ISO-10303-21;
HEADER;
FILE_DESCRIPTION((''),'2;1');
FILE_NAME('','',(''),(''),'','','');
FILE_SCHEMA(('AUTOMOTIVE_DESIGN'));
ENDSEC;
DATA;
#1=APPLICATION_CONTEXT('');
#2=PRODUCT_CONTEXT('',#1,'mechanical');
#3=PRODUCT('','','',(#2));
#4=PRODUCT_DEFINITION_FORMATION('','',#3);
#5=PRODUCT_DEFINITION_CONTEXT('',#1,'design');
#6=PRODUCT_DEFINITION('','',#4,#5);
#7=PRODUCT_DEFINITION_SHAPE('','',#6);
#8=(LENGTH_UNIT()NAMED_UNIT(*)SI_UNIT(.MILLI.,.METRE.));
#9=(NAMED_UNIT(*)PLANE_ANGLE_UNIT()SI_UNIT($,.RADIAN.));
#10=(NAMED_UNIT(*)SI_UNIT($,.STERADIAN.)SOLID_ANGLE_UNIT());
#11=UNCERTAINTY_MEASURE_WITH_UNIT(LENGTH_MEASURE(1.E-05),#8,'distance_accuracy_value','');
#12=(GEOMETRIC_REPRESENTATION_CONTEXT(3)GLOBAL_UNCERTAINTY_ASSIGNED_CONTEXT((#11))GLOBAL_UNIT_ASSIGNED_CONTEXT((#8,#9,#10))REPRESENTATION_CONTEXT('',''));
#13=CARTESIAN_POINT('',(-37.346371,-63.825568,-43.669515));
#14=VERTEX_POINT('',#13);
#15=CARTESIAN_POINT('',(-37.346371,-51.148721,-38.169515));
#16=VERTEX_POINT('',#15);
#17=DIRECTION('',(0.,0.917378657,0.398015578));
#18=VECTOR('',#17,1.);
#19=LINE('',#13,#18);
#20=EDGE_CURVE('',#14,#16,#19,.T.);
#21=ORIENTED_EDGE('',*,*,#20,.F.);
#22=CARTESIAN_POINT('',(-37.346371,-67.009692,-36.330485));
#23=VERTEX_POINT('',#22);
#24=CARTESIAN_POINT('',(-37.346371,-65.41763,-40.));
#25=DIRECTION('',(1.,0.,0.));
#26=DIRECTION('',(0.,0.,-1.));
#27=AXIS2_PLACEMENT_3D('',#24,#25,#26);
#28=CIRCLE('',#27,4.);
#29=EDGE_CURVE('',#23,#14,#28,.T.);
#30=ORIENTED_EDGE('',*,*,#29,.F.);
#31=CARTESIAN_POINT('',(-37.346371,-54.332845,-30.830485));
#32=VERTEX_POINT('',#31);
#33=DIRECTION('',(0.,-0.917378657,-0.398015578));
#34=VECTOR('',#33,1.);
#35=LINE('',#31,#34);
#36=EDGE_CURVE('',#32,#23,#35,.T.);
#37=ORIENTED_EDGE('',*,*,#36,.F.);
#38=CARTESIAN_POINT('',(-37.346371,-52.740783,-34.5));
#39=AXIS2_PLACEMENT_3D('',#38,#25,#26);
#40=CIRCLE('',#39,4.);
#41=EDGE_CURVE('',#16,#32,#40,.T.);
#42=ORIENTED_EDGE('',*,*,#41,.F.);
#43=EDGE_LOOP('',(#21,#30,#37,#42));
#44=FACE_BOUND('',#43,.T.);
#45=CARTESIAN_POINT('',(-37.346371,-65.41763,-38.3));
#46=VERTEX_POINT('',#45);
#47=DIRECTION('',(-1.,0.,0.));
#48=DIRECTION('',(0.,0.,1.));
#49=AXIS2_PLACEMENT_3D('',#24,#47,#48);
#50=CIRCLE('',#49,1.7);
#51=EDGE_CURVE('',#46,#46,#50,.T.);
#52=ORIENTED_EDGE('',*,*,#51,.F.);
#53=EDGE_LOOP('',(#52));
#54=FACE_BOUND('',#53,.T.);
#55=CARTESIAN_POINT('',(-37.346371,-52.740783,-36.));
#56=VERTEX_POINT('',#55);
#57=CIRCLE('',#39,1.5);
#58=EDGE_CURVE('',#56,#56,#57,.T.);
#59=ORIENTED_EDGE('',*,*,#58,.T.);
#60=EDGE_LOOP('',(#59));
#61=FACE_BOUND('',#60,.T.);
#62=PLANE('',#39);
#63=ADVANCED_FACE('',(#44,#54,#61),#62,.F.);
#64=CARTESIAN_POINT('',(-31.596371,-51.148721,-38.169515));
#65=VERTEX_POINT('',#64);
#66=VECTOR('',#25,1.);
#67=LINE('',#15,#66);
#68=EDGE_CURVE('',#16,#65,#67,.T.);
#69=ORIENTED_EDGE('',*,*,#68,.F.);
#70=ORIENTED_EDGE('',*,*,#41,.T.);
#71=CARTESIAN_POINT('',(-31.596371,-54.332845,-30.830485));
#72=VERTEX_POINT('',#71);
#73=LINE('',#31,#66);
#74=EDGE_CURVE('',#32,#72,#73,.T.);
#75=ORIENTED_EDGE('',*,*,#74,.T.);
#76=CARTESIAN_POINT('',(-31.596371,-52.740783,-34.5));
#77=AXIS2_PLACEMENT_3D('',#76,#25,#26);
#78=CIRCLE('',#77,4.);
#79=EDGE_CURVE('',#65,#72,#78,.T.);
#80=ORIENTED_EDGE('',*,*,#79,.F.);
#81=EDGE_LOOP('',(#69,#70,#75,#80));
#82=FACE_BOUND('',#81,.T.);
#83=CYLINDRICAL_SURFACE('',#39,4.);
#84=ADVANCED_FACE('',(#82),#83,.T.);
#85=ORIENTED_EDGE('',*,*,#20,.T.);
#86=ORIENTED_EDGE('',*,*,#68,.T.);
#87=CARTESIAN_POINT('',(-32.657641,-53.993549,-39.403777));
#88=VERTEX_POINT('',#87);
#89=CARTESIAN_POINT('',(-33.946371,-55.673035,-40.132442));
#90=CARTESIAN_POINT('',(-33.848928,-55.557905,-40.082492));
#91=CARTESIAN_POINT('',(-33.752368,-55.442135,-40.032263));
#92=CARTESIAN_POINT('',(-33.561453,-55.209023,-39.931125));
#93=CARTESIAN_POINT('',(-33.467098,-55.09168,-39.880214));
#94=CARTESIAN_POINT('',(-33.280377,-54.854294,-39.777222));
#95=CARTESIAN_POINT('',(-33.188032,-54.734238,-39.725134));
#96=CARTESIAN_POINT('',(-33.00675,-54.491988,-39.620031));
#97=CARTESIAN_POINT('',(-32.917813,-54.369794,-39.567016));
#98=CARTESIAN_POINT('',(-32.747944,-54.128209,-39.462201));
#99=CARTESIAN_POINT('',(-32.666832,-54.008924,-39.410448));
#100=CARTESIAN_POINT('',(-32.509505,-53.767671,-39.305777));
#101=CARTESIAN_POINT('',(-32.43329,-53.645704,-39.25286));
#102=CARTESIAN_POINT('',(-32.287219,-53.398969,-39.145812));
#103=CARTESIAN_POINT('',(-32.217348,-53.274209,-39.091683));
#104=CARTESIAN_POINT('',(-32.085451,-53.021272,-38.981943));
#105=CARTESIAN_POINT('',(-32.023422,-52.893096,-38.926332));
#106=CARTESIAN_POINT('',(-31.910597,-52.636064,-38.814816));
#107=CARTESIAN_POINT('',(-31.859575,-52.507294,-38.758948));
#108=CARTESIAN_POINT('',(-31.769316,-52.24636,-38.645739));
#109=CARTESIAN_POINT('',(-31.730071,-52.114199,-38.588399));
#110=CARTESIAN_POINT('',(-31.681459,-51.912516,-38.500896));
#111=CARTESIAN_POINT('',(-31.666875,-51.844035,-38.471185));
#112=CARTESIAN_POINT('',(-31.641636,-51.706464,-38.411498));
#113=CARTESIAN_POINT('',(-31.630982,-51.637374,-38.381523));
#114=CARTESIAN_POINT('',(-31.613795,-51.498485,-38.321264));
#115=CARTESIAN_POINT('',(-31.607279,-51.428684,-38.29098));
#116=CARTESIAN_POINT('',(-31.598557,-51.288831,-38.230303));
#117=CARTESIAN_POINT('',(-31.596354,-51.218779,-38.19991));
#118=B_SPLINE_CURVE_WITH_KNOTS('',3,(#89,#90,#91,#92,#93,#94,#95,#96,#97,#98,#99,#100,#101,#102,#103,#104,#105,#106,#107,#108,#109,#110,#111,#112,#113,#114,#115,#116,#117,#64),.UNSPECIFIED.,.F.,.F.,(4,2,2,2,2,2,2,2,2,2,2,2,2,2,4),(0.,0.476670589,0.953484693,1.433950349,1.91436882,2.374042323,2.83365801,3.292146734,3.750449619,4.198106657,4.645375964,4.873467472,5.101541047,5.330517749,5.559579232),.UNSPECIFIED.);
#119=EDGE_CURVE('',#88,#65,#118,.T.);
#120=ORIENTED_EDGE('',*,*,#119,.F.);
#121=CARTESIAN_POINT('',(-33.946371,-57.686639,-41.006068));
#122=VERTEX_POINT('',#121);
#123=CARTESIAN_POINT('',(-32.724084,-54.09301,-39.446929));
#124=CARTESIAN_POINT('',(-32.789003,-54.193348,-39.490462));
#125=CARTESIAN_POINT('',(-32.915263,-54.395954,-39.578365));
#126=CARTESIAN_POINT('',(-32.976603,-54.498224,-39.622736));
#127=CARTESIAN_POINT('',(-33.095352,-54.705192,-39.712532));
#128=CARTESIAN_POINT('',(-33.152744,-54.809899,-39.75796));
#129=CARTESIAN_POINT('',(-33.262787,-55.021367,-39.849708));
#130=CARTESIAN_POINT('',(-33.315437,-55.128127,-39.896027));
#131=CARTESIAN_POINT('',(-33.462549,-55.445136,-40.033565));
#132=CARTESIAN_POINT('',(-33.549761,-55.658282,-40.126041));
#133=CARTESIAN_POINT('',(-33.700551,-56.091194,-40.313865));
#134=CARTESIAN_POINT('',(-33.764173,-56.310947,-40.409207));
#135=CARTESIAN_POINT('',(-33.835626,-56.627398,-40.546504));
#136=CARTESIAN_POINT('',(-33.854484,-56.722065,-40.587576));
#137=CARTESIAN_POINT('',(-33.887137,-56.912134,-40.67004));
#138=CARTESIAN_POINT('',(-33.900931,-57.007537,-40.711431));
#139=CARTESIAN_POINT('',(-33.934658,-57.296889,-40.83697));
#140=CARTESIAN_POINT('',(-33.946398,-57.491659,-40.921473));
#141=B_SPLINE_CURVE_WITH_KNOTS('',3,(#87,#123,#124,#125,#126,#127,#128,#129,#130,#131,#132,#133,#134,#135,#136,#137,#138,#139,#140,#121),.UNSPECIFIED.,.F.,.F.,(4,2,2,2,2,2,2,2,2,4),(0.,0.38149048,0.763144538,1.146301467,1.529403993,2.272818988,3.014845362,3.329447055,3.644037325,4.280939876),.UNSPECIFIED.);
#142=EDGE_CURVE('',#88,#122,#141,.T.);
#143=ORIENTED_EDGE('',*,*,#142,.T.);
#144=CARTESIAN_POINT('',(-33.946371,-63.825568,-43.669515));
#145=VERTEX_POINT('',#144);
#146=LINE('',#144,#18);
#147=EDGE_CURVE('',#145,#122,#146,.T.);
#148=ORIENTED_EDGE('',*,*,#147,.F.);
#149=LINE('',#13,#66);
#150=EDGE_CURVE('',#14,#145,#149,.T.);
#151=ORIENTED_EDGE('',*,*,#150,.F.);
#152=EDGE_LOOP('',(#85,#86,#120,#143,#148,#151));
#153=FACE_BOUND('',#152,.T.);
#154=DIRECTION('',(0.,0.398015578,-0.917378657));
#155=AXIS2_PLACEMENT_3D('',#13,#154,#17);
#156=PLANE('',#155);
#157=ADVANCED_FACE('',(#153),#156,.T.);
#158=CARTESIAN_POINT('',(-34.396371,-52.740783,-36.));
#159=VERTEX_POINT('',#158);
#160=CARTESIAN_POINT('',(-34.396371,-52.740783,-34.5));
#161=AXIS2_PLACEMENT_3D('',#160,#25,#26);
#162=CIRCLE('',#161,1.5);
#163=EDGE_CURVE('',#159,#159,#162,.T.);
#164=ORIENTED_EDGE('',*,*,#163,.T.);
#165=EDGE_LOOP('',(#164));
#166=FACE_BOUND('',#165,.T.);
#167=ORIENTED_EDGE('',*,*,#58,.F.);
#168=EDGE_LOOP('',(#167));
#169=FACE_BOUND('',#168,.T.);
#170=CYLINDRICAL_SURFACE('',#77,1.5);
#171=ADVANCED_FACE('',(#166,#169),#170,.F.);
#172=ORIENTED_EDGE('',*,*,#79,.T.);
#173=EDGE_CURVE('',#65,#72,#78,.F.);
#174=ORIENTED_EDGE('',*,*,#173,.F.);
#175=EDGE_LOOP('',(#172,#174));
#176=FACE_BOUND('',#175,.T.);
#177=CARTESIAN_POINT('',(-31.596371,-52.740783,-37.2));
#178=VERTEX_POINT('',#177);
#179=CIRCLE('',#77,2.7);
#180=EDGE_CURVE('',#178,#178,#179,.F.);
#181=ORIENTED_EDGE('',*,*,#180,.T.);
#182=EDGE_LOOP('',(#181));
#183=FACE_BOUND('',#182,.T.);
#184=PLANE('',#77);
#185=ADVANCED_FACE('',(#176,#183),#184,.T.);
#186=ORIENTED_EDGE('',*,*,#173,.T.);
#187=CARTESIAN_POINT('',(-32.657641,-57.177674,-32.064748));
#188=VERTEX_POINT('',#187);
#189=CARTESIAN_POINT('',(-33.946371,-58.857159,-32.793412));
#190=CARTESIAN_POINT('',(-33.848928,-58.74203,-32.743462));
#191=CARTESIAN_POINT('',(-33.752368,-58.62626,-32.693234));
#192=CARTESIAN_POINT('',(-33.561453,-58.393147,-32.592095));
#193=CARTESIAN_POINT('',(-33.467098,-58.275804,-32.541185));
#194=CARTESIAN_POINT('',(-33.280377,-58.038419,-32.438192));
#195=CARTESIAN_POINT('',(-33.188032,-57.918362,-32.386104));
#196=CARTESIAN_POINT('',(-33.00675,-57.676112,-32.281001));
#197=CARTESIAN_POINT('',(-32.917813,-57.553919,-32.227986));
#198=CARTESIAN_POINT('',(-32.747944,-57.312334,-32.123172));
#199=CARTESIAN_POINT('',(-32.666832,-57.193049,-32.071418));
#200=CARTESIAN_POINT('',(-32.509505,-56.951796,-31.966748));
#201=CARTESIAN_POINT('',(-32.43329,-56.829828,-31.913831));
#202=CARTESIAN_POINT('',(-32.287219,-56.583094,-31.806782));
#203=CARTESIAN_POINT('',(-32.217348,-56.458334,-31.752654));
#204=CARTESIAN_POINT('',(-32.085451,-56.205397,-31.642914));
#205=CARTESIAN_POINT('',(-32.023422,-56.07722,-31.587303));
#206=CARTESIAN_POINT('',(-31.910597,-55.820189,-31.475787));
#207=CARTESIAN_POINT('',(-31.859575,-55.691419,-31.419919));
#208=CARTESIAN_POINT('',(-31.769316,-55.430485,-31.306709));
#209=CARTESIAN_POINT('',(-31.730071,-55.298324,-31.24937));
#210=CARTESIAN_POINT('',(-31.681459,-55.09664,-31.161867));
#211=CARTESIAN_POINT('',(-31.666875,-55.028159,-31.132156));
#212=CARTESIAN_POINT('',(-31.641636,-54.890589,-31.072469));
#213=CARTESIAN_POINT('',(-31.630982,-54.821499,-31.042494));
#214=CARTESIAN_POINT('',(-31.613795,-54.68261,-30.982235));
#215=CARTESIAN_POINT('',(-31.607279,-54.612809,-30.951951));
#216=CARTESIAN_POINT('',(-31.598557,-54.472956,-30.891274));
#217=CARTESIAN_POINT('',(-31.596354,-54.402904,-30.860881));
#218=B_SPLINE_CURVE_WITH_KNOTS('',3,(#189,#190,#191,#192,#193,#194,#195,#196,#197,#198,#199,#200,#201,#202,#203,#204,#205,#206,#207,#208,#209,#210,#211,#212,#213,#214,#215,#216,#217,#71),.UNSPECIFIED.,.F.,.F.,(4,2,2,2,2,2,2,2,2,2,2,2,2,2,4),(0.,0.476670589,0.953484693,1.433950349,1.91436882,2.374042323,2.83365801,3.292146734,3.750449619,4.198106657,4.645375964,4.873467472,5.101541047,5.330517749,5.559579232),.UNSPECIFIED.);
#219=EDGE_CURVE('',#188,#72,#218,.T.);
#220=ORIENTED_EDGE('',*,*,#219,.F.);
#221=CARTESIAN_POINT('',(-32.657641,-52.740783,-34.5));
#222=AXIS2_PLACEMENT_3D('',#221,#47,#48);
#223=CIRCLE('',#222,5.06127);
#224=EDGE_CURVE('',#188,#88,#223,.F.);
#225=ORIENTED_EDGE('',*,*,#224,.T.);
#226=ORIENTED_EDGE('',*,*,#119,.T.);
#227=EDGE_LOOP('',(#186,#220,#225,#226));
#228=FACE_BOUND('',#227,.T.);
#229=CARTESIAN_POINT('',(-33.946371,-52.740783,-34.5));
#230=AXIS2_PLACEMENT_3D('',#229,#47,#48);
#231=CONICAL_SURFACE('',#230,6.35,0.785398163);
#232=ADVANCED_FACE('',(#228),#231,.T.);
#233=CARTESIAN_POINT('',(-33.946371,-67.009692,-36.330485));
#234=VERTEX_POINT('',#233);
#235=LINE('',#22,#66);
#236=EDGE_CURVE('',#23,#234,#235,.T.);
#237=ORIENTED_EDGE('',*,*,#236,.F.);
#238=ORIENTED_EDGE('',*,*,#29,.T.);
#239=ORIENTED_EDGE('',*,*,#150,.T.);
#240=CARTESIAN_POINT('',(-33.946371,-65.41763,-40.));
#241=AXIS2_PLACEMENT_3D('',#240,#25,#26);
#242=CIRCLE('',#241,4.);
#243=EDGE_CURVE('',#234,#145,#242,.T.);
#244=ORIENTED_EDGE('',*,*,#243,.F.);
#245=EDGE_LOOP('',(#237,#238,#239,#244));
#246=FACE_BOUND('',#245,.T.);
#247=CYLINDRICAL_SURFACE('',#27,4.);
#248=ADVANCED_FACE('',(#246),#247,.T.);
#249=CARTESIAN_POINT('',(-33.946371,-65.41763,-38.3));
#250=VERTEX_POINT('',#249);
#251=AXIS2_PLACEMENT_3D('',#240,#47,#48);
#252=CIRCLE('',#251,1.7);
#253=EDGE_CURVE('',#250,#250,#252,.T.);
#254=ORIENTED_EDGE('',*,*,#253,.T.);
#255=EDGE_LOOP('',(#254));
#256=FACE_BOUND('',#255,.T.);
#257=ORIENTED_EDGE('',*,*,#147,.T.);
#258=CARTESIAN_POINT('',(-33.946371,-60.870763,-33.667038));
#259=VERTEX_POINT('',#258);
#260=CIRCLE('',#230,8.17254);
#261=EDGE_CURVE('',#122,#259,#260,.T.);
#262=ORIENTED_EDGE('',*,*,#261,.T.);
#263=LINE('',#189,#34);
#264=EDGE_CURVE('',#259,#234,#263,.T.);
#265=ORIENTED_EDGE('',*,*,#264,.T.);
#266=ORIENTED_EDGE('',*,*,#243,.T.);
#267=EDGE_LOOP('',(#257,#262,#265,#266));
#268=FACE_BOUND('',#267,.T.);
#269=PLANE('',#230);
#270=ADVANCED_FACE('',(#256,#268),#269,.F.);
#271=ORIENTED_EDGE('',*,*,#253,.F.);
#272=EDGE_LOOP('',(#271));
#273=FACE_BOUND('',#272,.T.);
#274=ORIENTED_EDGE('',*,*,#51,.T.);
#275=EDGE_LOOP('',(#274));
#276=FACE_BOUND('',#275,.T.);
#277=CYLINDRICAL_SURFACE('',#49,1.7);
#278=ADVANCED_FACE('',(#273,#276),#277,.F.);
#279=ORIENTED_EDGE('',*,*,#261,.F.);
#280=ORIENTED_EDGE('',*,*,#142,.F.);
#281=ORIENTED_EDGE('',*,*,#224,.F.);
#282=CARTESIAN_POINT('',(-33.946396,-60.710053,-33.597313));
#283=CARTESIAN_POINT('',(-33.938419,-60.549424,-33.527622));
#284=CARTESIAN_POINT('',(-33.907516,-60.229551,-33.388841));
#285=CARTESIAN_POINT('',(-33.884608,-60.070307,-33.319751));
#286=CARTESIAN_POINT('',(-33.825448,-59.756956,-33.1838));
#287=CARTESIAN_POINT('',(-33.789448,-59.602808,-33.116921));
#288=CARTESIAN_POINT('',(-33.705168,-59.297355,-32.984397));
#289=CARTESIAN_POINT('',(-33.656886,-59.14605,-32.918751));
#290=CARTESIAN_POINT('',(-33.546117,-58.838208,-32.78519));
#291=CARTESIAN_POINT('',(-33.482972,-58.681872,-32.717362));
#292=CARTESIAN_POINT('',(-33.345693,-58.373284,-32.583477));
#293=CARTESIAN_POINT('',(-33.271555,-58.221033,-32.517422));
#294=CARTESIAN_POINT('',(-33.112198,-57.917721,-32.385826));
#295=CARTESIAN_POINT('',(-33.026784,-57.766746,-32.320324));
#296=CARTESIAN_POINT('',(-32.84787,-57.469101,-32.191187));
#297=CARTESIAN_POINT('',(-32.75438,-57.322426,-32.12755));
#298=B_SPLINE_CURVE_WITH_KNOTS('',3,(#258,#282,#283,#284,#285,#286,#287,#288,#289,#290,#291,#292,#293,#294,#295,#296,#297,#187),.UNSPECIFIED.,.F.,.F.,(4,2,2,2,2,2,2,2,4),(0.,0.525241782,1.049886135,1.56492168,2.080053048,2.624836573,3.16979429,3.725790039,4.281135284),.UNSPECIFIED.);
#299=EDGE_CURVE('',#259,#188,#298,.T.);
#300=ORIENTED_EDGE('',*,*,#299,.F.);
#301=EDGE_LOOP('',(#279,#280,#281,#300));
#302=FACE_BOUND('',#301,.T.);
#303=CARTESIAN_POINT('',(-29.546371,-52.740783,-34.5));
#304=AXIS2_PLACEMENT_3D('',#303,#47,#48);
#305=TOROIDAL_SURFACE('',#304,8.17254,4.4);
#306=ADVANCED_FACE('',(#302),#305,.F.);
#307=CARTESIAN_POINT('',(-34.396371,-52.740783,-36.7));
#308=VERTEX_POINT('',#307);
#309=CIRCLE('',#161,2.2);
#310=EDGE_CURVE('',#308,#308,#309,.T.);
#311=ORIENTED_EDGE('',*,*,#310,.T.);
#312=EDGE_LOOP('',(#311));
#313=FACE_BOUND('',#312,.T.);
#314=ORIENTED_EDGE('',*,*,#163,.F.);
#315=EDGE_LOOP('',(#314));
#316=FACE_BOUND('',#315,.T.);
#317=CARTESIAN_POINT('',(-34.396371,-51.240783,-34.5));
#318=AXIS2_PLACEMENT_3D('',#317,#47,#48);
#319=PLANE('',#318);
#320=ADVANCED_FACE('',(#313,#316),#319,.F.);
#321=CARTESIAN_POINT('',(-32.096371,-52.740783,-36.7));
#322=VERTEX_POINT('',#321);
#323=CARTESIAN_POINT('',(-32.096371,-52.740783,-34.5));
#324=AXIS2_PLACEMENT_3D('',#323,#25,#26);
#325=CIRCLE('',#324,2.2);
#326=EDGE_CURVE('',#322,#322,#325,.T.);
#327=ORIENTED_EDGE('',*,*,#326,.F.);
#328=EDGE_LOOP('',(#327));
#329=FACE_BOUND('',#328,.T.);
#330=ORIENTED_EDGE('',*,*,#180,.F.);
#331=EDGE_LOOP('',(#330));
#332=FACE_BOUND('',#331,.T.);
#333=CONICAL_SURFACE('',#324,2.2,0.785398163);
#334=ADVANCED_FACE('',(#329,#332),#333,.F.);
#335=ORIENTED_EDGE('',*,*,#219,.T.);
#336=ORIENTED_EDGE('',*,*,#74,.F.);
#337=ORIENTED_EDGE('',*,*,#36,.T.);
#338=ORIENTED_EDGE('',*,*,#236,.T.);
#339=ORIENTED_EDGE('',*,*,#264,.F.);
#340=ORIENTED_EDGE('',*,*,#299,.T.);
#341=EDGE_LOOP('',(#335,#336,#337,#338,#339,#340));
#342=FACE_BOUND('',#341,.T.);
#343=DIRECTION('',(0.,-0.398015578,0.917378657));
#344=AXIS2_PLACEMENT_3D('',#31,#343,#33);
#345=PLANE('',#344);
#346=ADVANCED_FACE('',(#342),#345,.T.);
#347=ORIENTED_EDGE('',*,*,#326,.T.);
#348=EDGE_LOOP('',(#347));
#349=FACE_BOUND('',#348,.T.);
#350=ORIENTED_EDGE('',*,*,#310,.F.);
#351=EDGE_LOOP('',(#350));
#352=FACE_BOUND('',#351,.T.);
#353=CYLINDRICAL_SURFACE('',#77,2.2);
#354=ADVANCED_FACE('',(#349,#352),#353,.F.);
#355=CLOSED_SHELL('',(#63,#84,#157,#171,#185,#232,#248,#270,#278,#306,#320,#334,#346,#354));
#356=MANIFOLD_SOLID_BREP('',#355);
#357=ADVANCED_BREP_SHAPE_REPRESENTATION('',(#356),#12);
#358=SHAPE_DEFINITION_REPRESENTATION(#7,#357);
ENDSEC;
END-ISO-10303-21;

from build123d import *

# Parameters (mm, degrees)
BOSS_EXTRUDE1_DEPTH = 5.75
CUT_EXTRUDE1_DEPTH  = 2.35
HOLE1_D             = 3.4
HOLE2_D             = 3
HOLE2_CBORE_D       = 4.4
HOLE2_CBORE_DEPTH   = 2.8
CHAMFER1_SIZE       = 0.5
FILLET1_R           = 4.4


# Read off the part's stored shape, not the designer's step: Draft1
with BuildPart() as part:
    # Sketch1 → Boss-Extrude1 (new body)
    with BuildSketch(Plane(origin=(-31.596370889, 0, 0), x_dir=(0, 0, -1), z_dir=(1, 0, 0))):
        with BuildLine():
            Line((30.830485373, -54.332845156), (36.330485373, -67.009692228))
            ThreePointArc((36.330485373, -67.009692228), (41.592062311, -69.087144543), (43.669514627, -63.825567605))
            Line((43.669514627, -63.825567605), (38.169514627, -51.148720534))
            ThreePointArc((38.169514627, -51.148720534), (32.907937689, -49.071268218), (30.830485373, -54.332845156))
        make_face()
    extrude(amount=-BOSS_EXTRUDE1_DEPTH)

    # Sketch2 → Cut-Extrude1 (cut)
    with BuildSketch(Plane(origin=(-31.596370889, 0, 0), x_dir=(0, 0, -1), z_dir=(1, 0, 0))):
        with BuildLine():
            Line((32.793412497, -58.857159149), (36.330485373, -67.009692228))
            ThreePointArc((36.330485373, -67.009692228), (41.592062311, -69.087144543), (43.669514627, -63.825567605))
            Line((43.669514627, -63.825567605), (40.132441751, -55.673034527))
            ThreePointArc((40.132441751, -55.673034527), (37.027398919, -58.566137315), (32.793412497, -58.857159149))
        make_face()
    extrude(amount=-CUT_EXTRUDE1_DEPTH, mode=Mode.SUBTRACT)

    # Draft1 outline → Draft1 (revolve, cut)
    with BuildSketch(Plane(origin=(0, -52.740782845, -34.5), x_dir=(0, 1, 0), z_dir=(0, 0, -1))):
        Polygon((6.35, -31.596367589), (3.9999967, -31.596367589), (6.35, -33.946370889), align=None)
    revolve(axis=Axis((0, -52.740782845, -34.5), (1, 0, 0)), mode=Mode.SUBTRACT)

    # Hole1 (through all)
    with Locations(Plane.ZY.offset(37.346370889)):
        with Locations((-40, -65.417629916)):
            Hole(HOLE1_D / 2)

    # Hole2 (through all)
    with Locations(Plane(origin=(-31.596370889, 0, 0), x_dir=(0, 0, -1), z_dir=(1, 0, 0))):
        with Locations((34.5, -52.740782845)):
            CounterBoreHole(HOLE2_D / 2, HOLE2_CBORE_D / 2, HOLE2_CBORE_DEPTH)

    # Chamfer1
    chamfer1_edges = [part.edges().sort_by_distance(p)[0] for p in [
        (-31.596370889, -52.740782845, -32.3),
    ]]
    chamfer(chamfer1_edges, length=CHAMFER1_SIZE)

    # Fillet1
    fillet1_edges = [part.edges().sort_by_distance(p)[0] for p in [
        (-33.946370889, -58.566137315, -37.027398919),
    ]]
    fillet(fillet1_edges, radius=FILLET1_R)


solid = part.part
